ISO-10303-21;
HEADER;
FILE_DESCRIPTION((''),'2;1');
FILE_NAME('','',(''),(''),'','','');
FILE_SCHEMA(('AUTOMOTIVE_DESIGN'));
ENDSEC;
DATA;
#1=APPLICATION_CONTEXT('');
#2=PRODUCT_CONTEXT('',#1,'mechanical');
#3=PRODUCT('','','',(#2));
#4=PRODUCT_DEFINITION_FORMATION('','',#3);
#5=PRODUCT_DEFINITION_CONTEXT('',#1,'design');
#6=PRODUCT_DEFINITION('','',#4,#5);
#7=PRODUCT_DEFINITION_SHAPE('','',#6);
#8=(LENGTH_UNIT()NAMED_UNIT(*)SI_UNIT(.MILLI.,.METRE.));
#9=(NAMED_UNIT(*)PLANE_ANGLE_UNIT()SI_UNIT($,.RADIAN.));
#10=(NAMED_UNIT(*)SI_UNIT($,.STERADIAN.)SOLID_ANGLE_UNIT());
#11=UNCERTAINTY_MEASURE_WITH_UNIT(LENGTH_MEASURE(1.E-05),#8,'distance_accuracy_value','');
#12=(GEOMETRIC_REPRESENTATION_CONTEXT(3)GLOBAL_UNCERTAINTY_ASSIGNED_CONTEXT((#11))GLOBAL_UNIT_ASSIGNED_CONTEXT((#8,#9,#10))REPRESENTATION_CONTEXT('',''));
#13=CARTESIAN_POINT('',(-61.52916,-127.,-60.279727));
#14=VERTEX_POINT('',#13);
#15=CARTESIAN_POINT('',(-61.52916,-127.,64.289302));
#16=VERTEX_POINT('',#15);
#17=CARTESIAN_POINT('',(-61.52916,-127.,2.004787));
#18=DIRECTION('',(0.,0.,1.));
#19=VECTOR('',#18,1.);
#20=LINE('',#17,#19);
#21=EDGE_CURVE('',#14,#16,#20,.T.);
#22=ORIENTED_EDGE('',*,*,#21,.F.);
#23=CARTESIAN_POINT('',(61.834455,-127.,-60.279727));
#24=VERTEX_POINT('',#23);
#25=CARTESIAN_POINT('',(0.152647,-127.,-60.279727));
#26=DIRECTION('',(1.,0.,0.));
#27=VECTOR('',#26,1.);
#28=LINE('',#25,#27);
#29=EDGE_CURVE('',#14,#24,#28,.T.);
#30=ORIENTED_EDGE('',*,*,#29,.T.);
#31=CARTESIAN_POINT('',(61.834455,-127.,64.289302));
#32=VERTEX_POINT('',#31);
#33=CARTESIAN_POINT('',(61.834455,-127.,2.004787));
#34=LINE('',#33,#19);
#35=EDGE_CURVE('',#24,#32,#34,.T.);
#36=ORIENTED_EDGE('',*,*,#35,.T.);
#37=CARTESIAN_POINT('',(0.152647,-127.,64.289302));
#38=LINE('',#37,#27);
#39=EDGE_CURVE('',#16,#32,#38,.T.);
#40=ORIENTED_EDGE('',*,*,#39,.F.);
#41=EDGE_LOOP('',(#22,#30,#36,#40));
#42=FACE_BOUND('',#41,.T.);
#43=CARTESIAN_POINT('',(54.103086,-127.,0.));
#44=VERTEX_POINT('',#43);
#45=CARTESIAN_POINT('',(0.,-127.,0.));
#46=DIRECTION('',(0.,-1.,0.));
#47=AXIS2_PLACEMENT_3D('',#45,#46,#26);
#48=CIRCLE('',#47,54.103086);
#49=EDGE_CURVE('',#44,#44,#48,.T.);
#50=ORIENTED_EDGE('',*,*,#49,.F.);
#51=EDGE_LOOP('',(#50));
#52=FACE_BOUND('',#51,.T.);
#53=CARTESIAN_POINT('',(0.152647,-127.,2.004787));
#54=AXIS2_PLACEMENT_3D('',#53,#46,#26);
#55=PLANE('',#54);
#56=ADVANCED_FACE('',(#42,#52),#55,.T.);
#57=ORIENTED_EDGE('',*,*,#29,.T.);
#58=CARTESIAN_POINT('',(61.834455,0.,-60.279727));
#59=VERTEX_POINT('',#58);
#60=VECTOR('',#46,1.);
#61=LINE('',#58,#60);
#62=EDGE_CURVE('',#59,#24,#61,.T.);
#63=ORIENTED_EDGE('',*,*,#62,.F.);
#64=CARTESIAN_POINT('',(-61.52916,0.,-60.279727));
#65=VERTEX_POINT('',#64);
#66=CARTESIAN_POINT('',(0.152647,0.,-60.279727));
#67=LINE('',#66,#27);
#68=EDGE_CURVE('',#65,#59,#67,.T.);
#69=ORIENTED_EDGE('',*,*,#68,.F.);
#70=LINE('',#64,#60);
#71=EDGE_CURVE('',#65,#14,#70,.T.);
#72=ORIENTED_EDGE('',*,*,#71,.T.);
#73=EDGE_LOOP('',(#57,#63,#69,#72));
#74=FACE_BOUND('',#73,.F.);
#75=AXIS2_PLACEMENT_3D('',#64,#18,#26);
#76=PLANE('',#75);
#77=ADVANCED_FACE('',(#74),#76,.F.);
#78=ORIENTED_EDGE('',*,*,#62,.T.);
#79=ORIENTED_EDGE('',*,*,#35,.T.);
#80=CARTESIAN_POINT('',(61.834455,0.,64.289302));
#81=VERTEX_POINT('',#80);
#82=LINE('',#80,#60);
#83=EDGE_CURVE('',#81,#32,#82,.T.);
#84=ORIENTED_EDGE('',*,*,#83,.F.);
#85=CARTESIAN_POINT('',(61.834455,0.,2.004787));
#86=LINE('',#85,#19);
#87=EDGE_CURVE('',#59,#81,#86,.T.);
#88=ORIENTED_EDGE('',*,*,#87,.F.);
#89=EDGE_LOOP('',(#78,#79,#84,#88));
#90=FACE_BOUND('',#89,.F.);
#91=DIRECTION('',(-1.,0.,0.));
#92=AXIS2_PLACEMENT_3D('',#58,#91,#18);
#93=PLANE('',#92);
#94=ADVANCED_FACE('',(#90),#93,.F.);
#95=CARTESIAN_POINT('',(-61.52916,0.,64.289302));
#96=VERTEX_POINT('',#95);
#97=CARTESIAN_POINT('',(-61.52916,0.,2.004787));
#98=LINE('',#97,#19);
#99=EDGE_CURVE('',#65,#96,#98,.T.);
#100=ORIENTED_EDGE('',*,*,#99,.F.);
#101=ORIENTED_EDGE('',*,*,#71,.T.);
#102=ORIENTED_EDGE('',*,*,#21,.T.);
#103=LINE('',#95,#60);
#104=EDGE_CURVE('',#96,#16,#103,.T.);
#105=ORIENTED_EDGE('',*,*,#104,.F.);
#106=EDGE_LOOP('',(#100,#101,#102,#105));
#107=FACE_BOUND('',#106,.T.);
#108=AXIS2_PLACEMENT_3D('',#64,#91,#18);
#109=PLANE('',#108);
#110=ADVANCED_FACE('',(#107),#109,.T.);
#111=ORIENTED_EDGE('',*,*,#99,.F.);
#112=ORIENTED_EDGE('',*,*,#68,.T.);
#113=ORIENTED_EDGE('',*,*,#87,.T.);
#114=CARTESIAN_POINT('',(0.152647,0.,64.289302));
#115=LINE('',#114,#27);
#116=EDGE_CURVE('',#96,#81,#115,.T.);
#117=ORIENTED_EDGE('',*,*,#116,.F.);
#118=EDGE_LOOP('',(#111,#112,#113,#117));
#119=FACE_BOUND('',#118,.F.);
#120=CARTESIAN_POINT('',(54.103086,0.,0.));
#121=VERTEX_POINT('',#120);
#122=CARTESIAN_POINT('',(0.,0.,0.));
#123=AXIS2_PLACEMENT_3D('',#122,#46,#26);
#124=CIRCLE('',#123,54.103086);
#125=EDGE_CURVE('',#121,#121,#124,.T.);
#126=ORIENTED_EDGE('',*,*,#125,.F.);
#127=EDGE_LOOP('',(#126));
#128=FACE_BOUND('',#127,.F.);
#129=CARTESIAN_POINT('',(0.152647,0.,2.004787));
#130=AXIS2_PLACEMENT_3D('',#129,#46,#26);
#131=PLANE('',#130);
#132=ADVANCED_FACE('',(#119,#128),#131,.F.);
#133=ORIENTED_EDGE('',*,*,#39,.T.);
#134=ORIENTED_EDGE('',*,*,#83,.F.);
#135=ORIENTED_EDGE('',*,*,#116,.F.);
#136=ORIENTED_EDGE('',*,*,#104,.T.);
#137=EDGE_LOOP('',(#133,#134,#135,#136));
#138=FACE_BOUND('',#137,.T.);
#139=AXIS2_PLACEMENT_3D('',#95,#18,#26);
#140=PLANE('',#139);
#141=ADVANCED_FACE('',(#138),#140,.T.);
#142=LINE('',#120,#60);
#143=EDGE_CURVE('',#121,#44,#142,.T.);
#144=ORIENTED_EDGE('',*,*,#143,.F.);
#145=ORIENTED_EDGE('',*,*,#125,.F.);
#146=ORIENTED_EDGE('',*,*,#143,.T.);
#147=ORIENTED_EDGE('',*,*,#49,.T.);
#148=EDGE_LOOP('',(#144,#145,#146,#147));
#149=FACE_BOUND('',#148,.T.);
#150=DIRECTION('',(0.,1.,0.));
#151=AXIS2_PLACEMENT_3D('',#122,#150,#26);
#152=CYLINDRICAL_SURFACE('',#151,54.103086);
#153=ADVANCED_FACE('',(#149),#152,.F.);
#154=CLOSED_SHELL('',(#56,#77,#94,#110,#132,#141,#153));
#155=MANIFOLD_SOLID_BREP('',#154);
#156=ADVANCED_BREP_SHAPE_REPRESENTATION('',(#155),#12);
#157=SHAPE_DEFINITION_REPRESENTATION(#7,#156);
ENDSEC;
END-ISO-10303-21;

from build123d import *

# Parameters (mm, degrees)
F0_W     = 123.3636140823
F0_H     = 124.569028616
F0_R     = 54.1030855555
F1_DEPTH = 127


# Not quite as in the source:
# - the program builds the solid bodies; features that only make, move or delete a surface that nothing else refers to are left out


with BuildPart() as f1:
    # F0 (on Front) → F1 (new body)
    with BuildSketch(Plane.XZ):
        with Locations((0.1526474953, 2.0047873259)):
            Rectangle(F0_W, F0_H)
        Circle(F0_R, mode=Mode.SUBTRACT)
    extrude(amount=F1_DEPTH)


solid = f1.part
